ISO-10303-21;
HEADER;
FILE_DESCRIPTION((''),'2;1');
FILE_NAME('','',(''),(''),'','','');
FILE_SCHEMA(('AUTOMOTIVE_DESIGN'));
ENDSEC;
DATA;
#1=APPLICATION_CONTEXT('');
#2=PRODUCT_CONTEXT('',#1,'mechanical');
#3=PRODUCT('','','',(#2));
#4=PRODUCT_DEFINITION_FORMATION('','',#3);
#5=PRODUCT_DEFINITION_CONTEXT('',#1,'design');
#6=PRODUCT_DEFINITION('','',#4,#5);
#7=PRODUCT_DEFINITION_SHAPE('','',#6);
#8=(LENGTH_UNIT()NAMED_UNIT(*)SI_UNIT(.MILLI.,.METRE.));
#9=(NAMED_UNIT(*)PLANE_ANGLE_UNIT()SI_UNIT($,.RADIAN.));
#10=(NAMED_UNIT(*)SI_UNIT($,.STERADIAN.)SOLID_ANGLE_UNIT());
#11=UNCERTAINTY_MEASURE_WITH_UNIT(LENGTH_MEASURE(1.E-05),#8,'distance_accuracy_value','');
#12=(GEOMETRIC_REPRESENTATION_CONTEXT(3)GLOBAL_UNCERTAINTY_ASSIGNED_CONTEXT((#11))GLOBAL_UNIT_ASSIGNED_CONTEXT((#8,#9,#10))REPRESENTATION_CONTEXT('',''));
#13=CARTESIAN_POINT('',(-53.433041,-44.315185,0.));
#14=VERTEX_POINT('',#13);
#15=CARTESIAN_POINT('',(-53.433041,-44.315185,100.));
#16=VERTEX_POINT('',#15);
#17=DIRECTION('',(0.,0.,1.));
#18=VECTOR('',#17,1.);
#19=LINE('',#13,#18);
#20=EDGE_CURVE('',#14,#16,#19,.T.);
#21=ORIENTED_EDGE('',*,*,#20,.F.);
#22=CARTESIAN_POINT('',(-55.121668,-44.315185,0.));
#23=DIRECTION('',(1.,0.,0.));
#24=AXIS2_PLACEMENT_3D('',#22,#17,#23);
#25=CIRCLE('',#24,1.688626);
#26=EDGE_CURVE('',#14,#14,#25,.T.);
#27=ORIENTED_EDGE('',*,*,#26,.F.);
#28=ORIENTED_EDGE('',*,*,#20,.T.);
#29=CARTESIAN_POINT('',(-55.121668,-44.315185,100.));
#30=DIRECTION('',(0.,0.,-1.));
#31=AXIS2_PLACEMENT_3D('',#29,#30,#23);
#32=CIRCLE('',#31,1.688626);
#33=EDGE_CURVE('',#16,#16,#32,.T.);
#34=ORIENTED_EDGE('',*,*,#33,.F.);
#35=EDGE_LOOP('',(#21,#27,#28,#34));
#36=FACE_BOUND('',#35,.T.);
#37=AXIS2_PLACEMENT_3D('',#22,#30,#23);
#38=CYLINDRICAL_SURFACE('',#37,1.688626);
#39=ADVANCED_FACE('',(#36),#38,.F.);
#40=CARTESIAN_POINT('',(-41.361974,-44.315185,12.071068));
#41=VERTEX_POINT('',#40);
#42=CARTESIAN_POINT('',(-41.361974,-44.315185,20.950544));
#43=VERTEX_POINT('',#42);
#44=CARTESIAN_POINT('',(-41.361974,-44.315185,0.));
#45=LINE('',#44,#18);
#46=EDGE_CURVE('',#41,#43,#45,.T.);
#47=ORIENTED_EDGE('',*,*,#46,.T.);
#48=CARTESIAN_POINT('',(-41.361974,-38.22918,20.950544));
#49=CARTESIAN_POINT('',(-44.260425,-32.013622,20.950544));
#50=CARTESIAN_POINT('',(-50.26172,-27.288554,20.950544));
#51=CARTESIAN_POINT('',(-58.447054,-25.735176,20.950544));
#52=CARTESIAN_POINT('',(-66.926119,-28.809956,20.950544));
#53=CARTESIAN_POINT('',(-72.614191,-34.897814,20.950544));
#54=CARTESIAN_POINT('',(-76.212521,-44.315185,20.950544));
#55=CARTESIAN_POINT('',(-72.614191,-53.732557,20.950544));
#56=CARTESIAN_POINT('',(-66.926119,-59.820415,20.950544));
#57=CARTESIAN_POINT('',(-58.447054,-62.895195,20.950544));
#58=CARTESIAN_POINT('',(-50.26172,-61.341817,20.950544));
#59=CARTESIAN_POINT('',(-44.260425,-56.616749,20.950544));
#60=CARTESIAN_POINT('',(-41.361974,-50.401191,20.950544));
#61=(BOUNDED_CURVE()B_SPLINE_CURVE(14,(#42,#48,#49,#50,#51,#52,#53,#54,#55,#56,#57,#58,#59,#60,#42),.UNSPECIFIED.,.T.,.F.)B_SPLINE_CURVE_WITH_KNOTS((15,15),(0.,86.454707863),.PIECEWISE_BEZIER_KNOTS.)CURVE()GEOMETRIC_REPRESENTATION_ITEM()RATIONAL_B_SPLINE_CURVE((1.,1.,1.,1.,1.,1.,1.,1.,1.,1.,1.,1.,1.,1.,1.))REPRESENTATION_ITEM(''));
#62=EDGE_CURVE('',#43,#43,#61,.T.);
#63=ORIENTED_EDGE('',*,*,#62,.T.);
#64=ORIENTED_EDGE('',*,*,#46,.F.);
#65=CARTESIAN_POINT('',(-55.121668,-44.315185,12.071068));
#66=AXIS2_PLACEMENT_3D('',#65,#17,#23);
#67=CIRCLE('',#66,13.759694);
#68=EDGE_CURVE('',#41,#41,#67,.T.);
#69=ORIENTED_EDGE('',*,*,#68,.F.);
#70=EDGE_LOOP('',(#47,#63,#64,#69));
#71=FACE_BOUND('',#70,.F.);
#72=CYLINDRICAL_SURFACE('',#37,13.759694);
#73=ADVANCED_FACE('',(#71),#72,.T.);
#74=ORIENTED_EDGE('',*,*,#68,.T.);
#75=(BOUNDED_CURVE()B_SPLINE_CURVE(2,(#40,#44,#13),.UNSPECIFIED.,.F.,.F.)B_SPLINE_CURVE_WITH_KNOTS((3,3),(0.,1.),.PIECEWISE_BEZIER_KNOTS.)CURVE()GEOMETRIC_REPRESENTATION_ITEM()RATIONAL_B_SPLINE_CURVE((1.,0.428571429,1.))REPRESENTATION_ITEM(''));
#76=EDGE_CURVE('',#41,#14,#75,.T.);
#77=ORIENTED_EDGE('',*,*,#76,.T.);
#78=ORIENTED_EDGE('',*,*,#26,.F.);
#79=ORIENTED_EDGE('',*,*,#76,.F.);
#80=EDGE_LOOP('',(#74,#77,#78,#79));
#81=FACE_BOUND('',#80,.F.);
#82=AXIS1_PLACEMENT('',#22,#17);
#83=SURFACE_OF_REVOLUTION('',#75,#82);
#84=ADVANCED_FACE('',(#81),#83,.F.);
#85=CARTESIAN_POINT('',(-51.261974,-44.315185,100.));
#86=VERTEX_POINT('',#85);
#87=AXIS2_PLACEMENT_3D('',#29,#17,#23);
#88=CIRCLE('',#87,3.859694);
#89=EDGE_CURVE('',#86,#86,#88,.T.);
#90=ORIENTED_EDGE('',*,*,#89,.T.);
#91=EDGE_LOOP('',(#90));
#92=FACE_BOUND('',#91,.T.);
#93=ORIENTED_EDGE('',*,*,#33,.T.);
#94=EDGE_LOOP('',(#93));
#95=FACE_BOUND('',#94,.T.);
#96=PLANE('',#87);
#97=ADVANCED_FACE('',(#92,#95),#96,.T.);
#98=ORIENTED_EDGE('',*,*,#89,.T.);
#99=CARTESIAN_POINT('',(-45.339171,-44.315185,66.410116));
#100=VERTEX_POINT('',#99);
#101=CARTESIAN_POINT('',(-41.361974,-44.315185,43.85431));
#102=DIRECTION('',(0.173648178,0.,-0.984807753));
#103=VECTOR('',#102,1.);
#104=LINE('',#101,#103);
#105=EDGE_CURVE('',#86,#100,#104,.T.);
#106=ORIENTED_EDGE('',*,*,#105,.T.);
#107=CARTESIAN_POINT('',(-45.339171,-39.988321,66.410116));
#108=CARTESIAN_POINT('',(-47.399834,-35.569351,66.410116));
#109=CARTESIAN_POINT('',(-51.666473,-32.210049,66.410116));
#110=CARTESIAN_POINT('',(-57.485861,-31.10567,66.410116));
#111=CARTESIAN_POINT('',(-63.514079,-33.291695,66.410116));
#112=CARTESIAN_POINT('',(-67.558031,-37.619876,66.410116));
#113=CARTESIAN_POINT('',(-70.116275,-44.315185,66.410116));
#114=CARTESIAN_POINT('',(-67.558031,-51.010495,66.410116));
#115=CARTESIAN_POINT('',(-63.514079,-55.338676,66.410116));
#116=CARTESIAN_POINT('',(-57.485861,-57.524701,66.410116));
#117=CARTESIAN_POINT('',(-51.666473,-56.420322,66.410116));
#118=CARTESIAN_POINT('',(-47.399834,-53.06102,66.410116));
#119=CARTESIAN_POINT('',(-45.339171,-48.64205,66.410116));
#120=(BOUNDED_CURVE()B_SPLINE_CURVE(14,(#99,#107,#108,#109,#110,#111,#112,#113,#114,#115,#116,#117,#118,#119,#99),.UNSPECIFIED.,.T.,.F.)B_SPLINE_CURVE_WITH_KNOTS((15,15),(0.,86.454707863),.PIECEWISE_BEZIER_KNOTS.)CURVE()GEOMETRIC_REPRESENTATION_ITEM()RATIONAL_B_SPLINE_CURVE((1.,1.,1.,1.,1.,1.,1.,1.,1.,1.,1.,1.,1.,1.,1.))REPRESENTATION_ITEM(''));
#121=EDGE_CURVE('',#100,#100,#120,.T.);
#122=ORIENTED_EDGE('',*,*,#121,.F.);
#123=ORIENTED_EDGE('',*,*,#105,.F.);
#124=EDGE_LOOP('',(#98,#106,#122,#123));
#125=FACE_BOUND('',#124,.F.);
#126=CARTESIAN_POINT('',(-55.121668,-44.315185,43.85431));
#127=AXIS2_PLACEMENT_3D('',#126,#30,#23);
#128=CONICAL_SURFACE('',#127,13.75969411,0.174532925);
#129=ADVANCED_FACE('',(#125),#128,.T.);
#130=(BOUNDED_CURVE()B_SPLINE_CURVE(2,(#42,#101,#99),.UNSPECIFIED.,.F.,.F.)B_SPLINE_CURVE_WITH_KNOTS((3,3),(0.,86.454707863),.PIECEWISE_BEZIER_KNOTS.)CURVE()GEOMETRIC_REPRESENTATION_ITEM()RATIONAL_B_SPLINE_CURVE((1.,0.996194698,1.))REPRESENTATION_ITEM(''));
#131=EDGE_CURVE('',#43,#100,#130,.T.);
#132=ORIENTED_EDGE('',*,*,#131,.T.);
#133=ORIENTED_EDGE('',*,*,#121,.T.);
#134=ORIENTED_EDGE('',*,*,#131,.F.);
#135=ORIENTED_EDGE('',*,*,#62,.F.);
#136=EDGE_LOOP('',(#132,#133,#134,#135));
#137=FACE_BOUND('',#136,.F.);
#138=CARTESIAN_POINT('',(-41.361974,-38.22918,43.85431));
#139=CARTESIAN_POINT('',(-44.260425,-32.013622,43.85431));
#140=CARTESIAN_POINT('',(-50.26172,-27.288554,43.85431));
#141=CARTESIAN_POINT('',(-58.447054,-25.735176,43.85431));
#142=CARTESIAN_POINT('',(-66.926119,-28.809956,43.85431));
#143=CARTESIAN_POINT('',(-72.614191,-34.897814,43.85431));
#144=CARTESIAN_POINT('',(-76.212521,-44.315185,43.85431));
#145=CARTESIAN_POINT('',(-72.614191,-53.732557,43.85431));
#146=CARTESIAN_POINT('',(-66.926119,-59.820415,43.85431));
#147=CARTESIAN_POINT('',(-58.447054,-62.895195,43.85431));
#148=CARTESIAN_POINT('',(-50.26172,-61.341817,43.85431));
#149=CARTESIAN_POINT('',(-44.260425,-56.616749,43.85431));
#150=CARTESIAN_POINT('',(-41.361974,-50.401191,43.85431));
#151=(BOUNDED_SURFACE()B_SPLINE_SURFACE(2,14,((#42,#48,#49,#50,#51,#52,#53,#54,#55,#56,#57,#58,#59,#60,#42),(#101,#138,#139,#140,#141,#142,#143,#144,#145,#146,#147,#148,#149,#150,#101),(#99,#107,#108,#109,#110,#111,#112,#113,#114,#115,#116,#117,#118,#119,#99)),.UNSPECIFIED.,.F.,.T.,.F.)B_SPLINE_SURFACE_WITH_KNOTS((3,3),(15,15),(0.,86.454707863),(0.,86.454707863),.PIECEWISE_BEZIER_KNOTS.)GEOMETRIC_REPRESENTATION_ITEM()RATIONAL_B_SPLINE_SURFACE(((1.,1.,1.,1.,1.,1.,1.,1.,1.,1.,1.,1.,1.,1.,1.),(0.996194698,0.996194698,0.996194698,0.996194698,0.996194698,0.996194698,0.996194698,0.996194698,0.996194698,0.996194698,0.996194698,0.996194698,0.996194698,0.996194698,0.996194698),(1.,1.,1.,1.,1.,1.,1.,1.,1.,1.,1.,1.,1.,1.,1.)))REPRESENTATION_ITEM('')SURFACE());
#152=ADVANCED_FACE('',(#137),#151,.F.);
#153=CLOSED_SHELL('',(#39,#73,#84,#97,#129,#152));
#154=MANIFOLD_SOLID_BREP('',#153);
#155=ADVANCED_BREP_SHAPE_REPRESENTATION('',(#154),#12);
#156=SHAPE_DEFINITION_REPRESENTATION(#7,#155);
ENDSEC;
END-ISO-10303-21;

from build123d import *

# Parameters (mm, degrees)
F0_R     = 13.75969411
F1_DEPTH = 100
F3_DEPTH = 100.001
F4_SIZE2 = 56.1456900142
F4_SIZE  = 9.9
F5_R     = 261.7912381488


# Not quite as in the source:
# - a fillet or chamfer that OpenCascade refuses, or shapes differently, is made with other operations: its cross-section is extruded or revolved along the edge and cut away or added


with BuildPart() as f1:
    # F0 (on Top) → F1 (new body)
    with BuildSketch(Plane.XY):
        with Locations((-55.1216676831, -44.3151853979)):
            Circle(F0_R)
    extrude(amount=F1_DEPTH)

    # F2: fillet of radius 12.0710678119 on 1 edges, made by hand

    # F2_s1 → F2_t2 (revolve, cut)
    with BuildSketch(Plane.XZ.offset(44.3151853979)):
        with BuildLine():
            add(Edge.make_bspline(
                [(-41.3619735731, 12.0710678119), (-41.3619735731, 0), (-53.433041385, 0)],
                knots=[0, 0, 0, 1, 1, 1], degree=2, weights=[1, 0.4285714286, 1]))
            Line((-53.433041385, 0), (-41.3619735731, 0))
            Line((-41.3619735731, 0), (-41.3619735731, 12.0710678119))
        make_face()
    revolve(axis=Axis((-55.1216676831, -44.3151853979, 0), (0, 0, 1)), mode=Mode.SUBTRACT)

    # F3 (cut, through all): a face of the model
    f3_faces = [f1.faces().sort_by_distance(p)[0] for p in [
        (-55.1216676831, -44.3151853979, 0),
    ]]
    extrude(f3_faces, amount=-F3_DEPTH, mode=Mode.SUBTRACT)

    # F4
    f4_edges = [f1.edges().sort_by_distance(p)[0] for p in [
        (-68.881362, -44.315185, 100),
    ]]
    f4_side = f1.faces().sort_by_distance((-68.492179, -44.315185, 100))[0]
    chamfer(f4_edges, length=F4_SIZE, length2=F4_SIZE2, reference=f4_side)

    # F5
    f5_edges = [f1.edges().sort_by_distance(p)[0] for p in [
        (-68.881362, -44.315185, 43.85431),
    ]]
    fillet(f5_edges, radius=F5_R)


solid = f1.part
